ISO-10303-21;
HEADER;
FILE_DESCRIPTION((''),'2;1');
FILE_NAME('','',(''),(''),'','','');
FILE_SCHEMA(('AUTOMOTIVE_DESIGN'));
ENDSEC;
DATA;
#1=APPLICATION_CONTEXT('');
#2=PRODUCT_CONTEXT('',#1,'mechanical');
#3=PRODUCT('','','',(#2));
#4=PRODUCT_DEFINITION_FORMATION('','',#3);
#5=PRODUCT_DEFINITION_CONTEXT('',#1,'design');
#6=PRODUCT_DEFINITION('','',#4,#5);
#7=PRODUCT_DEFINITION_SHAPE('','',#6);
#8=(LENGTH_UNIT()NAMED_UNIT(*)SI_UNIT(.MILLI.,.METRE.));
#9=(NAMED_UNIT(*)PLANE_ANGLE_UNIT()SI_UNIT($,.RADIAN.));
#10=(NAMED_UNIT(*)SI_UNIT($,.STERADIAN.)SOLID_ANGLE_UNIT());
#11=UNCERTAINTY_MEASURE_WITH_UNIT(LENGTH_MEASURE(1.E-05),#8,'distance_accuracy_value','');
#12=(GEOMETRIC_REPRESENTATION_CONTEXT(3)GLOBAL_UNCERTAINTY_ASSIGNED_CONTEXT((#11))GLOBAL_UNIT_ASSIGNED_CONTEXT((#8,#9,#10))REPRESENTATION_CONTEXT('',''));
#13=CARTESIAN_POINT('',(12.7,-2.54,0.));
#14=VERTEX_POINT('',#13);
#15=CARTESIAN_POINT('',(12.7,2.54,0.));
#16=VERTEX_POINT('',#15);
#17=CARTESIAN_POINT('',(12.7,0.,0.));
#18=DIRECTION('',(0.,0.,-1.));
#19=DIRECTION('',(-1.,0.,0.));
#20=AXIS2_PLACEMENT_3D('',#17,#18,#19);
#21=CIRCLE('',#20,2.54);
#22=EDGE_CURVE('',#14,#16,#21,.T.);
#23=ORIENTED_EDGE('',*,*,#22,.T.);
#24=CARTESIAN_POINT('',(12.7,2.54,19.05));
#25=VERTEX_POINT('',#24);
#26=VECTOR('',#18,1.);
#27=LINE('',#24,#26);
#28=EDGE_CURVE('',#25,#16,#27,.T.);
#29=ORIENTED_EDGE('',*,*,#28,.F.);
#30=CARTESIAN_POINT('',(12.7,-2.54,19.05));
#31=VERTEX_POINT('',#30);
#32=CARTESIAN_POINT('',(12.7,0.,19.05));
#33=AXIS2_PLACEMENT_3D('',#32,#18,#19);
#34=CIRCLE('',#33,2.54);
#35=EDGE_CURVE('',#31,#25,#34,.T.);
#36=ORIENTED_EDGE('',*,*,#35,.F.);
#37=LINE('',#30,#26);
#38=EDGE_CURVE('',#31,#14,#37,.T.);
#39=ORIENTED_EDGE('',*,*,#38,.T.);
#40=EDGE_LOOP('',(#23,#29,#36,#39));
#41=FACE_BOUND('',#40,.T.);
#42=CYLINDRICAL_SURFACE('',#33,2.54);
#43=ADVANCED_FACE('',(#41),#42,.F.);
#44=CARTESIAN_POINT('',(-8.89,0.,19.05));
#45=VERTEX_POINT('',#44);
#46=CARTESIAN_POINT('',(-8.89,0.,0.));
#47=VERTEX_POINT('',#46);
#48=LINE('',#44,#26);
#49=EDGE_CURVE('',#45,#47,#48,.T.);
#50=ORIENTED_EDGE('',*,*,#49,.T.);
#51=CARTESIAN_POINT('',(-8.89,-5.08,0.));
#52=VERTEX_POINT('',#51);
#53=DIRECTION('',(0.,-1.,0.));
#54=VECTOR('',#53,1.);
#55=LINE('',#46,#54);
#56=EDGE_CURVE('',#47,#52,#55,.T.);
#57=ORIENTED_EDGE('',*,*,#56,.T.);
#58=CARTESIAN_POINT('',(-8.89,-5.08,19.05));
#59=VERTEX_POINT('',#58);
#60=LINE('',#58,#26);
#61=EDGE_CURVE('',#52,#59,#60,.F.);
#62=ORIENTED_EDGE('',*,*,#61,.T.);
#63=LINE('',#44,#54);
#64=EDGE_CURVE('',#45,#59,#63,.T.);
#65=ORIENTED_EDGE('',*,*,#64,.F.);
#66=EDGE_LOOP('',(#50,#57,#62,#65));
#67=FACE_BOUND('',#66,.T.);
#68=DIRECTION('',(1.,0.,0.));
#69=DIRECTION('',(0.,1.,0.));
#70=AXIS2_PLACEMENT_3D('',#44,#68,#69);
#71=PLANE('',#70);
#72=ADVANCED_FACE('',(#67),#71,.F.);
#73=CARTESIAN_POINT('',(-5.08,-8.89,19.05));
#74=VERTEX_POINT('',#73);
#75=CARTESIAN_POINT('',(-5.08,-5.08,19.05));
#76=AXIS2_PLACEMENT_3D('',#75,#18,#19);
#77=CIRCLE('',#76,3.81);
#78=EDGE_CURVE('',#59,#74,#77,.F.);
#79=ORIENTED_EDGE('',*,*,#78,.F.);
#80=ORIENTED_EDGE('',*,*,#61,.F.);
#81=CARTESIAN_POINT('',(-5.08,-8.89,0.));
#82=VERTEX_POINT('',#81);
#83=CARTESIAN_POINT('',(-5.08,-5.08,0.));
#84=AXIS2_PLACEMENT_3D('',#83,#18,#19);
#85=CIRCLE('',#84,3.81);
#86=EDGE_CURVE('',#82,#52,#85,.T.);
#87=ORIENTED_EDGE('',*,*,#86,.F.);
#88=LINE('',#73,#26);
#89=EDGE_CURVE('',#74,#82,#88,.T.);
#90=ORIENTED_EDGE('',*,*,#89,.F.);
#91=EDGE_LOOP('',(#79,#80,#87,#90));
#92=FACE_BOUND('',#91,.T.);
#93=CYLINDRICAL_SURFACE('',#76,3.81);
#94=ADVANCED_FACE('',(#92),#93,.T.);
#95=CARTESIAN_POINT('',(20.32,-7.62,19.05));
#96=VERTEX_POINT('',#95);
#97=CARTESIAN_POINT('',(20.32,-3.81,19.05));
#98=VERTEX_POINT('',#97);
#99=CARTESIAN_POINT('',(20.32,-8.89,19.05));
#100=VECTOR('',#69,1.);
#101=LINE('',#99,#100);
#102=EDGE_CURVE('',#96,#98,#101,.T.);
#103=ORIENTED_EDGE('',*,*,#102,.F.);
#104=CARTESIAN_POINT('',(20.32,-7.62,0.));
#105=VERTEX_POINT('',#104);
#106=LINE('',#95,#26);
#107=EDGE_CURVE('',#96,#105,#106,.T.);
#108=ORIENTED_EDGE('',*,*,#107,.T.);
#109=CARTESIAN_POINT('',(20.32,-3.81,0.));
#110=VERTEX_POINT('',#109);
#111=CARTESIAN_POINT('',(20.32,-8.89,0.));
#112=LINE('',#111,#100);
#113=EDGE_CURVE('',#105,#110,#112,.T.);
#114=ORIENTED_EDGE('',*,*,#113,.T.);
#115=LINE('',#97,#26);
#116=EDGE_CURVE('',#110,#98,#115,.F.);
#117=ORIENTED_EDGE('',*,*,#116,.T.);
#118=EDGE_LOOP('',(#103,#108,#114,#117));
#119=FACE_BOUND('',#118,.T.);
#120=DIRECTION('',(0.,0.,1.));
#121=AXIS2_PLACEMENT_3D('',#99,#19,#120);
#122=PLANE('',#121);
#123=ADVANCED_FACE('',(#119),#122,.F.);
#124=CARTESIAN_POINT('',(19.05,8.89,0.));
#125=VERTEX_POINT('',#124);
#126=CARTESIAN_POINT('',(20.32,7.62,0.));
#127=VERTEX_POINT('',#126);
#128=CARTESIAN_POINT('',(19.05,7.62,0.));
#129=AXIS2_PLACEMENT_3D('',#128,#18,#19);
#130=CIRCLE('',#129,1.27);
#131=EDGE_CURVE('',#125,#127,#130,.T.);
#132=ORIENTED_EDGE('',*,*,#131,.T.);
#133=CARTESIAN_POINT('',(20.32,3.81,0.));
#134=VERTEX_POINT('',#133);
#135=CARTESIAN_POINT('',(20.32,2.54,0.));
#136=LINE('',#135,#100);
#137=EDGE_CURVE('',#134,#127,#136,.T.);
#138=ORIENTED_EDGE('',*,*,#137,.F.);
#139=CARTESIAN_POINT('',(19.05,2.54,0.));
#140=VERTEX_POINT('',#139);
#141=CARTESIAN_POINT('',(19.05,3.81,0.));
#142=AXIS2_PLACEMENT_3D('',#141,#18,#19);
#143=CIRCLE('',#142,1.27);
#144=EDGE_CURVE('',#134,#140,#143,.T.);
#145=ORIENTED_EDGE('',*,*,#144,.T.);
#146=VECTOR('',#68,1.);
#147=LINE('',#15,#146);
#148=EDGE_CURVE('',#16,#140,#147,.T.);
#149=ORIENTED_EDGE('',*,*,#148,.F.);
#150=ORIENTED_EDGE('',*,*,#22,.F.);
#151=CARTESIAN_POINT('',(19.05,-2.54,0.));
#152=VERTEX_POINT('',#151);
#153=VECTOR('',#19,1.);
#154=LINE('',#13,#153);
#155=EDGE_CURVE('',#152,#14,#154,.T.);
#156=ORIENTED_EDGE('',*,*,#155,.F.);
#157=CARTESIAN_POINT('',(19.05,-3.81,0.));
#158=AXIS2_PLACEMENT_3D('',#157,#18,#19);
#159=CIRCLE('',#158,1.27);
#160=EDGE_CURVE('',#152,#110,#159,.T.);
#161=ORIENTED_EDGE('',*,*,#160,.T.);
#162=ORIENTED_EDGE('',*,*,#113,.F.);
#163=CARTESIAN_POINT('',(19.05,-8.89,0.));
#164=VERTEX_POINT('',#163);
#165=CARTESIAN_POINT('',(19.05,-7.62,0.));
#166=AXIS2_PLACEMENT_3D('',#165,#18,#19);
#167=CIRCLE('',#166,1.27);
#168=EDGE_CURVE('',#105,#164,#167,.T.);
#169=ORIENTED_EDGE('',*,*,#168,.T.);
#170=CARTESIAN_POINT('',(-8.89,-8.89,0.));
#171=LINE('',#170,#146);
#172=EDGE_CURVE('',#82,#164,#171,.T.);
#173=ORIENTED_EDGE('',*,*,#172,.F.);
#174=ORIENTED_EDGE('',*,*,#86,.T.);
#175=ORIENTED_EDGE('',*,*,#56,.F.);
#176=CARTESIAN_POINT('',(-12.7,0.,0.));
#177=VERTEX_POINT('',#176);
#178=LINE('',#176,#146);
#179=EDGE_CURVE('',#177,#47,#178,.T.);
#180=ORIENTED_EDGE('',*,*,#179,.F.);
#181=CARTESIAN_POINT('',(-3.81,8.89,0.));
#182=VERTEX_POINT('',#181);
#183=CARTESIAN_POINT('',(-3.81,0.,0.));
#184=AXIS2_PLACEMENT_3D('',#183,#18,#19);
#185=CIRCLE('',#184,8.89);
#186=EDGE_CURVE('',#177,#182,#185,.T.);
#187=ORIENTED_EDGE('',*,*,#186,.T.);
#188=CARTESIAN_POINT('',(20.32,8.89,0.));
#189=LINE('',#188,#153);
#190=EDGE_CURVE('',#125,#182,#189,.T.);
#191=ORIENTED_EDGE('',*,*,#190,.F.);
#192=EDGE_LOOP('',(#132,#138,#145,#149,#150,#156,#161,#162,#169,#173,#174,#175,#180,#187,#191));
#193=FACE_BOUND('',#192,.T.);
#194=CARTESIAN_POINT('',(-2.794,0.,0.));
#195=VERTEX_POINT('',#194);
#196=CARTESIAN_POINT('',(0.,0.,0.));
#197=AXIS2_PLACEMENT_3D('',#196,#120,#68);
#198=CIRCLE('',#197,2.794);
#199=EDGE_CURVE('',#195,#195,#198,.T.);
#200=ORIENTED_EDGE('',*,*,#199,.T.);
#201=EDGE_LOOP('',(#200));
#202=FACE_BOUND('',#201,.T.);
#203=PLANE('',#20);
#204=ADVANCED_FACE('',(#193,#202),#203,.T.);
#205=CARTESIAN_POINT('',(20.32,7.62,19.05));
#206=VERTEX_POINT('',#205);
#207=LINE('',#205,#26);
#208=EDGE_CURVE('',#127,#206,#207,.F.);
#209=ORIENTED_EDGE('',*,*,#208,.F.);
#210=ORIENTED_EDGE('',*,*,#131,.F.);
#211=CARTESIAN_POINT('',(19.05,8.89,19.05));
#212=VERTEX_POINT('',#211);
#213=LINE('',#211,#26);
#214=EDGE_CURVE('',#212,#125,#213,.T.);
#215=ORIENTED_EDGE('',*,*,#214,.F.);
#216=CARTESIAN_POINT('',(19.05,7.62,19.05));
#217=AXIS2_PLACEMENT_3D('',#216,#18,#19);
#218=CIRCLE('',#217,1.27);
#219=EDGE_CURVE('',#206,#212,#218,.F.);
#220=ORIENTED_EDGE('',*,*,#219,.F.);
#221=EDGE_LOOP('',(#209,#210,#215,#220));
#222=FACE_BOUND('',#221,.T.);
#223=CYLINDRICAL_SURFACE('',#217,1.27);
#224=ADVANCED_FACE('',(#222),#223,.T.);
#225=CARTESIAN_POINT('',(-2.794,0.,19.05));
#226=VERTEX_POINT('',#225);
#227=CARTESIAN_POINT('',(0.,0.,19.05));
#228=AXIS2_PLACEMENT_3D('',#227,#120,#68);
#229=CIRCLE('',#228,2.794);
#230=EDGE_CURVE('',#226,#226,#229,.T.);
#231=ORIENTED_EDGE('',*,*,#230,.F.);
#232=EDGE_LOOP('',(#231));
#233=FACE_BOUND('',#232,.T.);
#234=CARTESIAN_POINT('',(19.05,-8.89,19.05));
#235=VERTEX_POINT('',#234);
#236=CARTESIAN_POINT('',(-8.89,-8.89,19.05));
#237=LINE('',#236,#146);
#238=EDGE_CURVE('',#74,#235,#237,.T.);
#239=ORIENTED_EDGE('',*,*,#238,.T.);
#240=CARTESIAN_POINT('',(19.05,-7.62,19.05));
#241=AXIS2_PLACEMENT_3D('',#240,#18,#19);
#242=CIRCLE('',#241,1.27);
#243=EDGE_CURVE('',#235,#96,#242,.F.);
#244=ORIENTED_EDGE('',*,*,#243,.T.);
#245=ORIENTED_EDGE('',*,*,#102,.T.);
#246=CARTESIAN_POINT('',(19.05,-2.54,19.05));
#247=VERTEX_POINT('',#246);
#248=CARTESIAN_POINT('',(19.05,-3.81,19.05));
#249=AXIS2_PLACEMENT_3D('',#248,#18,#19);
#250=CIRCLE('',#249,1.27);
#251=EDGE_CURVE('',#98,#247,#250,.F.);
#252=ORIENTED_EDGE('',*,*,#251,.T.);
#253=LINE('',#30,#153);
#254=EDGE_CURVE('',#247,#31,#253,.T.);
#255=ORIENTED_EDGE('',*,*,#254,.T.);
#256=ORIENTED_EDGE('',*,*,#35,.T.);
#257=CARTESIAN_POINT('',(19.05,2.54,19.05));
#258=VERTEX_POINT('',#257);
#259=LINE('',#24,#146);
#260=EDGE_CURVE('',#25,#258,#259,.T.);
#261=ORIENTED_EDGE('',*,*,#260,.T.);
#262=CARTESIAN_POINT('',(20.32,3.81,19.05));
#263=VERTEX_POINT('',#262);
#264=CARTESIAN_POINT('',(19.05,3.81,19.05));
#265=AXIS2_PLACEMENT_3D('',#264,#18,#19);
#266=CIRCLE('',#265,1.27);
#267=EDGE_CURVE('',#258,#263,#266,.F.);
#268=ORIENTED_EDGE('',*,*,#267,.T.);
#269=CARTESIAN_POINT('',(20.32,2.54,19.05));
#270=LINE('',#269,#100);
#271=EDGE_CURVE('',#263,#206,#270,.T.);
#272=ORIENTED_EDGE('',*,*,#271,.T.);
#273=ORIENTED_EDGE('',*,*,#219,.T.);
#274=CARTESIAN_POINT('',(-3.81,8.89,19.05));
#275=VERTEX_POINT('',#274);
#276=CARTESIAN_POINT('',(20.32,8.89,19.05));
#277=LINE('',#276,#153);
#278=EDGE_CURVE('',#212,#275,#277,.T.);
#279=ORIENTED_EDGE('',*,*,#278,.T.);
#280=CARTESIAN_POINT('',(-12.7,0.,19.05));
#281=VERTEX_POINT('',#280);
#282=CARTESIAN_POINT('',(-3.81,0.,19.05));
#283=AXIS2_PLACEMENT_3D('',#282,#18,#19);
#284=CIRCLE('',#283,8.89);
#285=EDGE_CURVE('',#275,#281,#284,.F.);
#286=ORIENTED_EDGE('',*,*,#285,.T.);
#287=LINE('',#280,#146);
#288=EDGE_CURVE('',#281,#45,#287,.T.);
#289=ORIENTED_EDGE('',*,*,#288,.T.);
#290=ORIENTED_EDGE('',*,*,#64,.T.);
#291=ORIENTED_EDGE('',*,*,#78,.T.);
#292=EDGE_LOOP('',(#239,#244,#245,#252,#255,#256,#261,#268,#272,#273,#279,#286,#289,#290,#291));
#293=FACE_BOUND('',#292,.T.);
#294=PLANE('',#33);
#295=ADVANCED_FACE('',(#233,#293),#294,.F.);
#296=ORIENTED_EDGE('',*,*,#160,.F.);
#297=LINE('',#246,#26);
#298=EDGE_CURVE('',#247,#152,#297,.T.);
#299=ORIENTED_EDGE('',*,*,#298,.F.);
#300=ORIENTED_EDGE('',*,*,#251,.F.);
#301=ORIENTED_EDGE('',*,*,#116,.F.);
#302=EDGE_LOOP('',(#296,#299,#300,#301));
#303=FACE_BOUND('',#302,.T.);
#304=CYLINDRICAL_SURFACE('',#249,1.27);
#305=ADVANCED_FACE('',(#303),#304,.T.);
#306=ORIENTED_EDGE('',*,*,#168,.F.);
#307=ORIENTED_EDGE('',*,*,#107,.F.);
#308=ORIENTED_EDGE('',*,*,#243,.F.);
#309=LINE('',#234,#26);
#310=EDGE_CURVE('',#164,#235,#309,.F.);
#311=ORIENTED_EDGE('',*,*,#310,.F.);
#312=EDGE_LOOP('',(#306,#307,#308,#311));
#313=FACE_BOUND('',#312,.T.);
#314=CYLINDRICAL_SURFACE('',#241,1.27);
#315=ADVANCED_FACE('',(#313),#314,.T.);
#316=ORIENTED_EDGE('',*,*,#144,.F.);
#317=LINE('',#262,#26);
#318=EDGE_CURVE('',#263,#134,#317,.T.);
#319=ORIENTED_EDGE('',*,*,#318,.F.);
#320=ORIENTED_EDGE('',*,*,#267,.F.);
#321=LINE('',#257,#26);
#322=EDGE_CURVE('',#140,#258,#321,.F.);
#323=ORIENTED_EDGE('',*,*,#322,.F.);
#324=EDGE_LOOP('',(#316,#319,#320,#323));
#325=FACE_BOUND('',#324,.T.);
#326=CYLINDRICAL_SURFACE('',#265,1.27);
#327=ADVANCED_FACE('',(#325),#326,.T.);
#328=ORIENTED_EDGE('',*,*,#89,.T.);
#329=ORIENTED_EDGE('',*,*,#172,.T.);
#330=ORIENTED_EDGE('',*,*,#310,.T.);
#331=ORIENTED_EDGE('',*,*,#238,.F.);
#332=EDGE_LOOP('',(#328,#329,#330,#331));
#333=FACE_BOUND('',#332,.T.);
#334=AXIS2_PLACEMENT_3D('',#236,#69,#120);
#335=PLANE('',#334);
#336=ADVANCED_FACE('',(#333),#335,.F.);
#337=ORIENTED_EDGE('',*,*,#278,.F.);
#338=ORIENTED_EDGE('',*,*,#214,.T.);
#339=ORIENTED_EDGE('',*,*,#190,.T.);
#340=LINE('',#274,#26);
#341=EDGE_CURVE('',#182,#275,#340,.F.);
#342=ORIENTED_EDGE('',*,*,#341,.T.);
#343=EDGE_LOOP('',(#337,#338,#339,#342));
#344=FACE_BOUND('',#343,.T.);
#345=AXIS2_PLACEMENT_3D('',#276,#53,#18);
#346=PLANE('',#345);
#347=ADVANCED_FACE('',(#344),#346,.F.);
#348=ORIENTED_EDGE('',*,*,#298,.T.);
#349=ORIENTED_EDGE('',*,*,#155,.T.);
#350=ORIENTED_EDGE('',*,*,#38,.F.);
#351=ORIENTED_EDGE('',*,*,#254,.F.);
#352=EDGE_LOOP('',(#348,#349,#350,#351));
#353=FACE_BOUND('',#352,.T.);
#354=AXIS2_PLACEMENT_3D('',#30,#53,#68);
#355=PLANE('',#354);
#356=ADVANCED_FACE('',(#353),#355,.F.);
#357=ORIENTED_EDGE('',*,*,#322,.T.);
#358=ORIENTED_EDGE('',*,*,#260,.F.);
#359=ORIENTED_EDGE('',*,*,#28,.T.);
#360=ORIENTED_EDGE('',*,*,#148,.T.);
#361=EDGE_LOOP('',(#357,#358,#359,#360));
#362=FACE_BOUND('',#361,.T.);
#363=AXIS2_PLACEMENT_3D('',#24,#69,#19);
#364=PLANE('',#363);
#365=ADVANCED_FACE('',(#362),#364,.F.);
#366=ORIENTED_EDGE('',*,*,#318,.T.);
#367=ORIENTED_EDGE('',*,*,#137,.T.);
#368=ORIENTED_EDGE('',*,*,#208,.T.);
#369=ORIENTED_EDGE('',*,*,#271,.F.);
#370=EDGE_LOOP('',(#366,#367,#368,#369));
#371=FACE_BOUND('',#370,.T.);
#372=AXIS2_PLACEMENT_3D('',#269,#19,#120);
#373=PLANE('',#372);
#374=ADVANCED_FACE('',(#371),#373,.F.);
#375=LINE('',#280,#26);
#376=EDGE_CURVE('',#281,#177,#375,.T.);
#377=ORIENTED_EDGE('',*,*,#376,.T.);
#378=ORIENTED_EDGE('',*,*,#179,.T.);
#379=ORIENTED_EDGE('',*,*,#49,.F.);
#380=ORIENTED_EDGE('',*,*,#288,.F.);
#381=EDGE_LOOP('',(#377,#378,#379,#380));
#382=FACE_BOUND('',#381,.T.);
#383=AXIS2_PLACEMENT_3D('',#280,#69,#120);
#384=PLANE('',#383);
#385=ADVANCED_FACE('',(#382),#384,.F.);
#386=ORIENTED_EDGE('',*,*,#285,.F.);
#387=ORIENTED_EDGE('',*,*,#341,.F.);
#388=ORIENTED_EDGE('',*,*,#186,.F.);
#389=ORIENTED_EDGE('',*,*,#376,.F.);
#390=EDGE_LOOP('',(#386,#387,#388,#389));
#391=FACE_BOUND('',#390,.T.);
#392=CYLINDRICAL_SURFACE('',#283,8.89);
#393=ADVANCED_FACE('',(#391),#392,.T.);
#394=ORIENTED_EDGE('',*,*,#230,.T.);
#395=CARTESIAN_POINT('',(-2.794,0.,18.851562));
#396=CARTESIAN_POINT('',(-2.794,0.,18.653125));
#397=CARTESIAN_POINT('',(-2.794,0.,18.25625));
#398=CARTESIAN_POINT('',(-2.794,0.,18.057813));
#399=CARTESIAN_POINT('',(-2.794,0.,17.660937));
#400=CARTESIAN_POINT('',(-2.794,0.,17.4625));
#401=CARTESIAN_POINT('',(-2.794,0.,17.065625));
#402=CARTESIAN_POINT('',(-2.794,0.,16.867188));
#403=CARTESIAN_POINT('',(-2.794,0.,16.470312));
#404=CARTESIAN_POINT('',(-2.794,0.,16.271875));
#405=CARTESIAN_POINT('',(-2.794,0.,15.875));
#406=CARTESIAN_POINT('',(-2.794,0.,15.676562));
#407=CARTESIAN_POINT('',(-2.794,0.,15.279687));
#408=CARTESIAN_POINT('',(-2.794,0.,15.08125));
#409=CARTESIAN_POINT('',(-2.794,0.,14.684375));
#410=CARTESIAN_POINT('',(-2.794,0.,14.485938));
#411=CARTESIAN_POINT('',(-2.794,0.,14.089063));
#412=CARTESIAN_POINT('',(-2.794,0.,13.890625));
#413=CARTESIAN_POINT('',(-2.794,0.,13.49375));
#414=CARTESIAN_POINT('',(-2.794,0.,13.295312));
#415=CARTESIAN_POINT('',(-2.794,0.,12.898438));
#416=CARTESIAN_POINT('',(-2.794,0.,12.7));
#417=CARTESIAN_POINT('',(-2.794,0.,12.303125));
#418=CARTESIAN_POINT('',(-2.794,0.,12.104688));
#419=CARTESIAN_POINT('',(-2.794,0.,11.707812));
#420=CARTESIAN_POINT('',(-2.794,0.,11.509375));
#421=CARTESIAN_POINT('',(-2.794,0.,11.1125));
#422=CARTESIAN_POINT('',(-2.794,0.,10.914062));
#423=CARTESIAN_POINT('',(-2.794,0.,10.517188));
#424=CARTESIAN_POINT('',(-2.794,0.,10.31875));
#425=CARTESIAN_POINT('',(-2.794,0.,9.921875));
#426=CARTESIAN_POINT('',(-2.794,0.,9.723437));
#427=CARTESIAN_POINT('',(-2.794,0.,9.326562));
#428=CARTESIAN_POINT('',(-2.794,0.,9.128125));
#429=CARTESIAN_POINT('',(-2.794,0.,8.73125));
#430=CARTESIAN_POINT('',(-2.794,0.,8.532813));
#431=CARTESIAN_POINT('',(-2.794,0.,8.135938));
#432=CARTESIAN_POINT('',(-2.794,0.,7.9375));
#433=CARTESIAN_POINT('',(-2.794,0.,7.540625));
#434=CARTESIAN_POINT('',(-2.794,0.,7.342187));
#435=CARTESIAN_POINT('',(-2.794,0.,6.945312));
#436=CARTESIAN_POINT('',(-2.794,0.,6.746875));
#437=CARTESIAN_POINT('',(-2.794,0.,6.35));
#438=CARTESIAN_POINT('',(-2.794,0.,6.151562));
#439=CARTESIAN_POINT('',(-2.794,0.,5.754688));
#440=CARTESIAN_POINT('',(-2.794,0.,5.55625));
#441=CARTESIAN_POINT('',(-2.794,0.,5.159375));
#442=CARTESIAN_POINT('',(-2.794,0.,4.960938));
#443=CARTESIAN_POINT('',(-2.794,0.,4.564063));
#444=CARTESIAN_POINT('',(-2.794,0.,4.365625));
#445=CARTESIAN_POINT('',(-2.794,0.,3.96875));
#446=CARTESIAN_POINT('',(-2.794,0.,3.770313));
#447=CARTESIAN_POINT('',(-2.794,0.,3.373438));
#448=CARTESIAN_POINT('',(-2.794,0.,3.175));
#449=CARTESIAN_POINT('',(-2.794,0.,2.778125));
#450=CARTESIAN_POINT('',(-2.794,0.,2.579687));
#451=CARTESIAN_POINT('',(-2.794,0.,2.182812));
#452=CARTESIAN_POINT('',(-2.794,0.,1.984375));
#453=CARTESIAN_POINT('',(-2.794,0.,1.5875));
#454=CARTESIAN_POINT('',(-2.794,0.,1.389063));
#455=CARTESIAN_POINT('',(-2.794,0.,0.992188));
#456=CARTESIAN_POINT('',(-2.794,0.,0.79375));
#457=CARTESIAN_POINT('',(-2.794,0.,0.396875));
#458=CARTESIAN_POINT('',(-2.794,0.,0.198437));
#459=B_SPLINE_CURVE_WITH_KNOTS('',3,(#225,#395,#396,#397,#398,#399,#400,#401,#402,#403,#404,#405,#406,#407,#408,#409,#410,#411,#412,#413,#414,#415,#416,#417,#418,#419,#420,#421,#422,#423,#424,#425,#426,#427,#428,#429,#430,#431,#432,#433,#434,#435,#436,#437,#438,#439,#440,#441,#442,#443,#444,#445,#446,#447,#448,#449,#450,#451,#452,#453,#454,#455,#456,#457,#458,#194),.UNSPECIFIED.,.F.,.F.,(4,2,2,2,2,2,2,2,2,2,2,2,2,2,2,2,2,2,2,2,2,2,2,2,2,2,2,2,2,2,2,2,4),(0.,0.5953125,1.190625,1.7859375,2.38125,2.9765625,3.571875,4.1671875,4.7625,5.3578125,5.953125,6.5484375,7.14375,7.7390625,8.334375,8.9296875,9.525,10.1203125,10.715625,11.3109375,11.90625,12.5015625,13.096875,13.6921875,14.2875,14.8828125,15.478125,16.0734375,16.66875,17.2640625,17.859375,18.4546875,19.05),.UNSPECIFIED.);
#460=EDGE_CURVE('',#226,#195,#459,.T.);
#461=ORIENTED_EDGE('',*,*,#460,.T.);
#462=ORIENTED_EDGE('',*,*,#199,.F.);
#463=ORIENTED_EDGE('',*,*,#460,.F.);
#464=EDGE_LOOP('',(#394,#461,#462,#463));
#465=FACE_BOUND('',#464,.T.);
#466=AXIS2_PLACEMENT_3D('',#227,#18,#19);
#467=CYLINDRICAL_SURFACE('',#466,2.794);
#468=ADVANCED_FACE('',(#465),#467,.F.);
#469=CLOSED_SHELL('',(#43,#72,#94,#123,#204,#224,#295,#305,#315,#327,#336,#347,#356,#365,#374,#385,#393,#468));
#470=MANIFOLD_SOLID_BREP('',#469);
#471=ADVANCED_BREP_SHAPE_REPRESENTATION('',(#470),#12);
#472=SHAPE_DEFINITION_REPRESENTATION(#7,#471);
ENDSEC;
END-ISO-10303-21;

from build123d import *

# Parameters (mm, degrees)
SKETCH1_R           = 2.794
BOSS_EXTRUDE1_DEPTH = 19.05
FILLET2_R           = 8.89
FRONT_FILLET_R      = 1.27
FILLET3_R           = 3.81


with BuildPart() as part:
    # Sketch1 → Boss-Extrude1 (new body)
    with BuildSketch(Plane.XY):
        with BuildLine():
            Line((-12.7, 0), (-8.89, 0))
            Line((-8.89, 0), (-8.89, -8.89))
            Line((-8.89, -8.89), (20.32, -8.89))
            Line((20.32, -8.89), (20.32, -2.54))
            Line((20.32, -2.54), (12.7, -2.54))
            ThreePointArc((12.7, -2.54), (10.16, 0), (12.7, 2.54))
            Line((12.7, 2.54), (20.32, 2.54))
            Line((20.32, 2.54), (20.32, 8.89))
            Line((20.32, 8.89), (-12.7, 8.89))
            Line((-12.7, 8.89), (-12.7, 0))
        make_face()
        with Locations(Location((0, 0, 0), (0, 0, 180))):
            Circle(SKETCH1_R, mode=Mode.SUBTRACT)
    extrude(amount=BOSS_EXTRUDE1_DEPTH)

    # Fillet2
    fillet2_edges = [part.edges().sort_by_distance(p)[0] for p in [
        (-12.7, 8.89, 9.525),
    ]]
    fillet(fillet2_edges, radius=FILLET2_R - 0.0001)  # a hair under: the kernel refuses the full size

    # front_fillet
    front_fillet_edges = [part.edges().sort_by_distance(p)[0] for p in [
        (20.32, -8.89, 9.525),
        (20.32, 8.89, 9.525),
        (20.32, 2.54, 9.525),
        (20.32, -2.54, 9.525),
    ]]
    fillet(front_fillet_edges, radius=FRONT_FILLET_R)

    # Fillet3
    fillet3_edges = [part.edges().sort_by_distance(p)[0] for p in [
        (-8.89, -8.89, 9.525),
    ]]
    fillet(fillet3_edges, radius=FILLET3_R)


solid = part.part
